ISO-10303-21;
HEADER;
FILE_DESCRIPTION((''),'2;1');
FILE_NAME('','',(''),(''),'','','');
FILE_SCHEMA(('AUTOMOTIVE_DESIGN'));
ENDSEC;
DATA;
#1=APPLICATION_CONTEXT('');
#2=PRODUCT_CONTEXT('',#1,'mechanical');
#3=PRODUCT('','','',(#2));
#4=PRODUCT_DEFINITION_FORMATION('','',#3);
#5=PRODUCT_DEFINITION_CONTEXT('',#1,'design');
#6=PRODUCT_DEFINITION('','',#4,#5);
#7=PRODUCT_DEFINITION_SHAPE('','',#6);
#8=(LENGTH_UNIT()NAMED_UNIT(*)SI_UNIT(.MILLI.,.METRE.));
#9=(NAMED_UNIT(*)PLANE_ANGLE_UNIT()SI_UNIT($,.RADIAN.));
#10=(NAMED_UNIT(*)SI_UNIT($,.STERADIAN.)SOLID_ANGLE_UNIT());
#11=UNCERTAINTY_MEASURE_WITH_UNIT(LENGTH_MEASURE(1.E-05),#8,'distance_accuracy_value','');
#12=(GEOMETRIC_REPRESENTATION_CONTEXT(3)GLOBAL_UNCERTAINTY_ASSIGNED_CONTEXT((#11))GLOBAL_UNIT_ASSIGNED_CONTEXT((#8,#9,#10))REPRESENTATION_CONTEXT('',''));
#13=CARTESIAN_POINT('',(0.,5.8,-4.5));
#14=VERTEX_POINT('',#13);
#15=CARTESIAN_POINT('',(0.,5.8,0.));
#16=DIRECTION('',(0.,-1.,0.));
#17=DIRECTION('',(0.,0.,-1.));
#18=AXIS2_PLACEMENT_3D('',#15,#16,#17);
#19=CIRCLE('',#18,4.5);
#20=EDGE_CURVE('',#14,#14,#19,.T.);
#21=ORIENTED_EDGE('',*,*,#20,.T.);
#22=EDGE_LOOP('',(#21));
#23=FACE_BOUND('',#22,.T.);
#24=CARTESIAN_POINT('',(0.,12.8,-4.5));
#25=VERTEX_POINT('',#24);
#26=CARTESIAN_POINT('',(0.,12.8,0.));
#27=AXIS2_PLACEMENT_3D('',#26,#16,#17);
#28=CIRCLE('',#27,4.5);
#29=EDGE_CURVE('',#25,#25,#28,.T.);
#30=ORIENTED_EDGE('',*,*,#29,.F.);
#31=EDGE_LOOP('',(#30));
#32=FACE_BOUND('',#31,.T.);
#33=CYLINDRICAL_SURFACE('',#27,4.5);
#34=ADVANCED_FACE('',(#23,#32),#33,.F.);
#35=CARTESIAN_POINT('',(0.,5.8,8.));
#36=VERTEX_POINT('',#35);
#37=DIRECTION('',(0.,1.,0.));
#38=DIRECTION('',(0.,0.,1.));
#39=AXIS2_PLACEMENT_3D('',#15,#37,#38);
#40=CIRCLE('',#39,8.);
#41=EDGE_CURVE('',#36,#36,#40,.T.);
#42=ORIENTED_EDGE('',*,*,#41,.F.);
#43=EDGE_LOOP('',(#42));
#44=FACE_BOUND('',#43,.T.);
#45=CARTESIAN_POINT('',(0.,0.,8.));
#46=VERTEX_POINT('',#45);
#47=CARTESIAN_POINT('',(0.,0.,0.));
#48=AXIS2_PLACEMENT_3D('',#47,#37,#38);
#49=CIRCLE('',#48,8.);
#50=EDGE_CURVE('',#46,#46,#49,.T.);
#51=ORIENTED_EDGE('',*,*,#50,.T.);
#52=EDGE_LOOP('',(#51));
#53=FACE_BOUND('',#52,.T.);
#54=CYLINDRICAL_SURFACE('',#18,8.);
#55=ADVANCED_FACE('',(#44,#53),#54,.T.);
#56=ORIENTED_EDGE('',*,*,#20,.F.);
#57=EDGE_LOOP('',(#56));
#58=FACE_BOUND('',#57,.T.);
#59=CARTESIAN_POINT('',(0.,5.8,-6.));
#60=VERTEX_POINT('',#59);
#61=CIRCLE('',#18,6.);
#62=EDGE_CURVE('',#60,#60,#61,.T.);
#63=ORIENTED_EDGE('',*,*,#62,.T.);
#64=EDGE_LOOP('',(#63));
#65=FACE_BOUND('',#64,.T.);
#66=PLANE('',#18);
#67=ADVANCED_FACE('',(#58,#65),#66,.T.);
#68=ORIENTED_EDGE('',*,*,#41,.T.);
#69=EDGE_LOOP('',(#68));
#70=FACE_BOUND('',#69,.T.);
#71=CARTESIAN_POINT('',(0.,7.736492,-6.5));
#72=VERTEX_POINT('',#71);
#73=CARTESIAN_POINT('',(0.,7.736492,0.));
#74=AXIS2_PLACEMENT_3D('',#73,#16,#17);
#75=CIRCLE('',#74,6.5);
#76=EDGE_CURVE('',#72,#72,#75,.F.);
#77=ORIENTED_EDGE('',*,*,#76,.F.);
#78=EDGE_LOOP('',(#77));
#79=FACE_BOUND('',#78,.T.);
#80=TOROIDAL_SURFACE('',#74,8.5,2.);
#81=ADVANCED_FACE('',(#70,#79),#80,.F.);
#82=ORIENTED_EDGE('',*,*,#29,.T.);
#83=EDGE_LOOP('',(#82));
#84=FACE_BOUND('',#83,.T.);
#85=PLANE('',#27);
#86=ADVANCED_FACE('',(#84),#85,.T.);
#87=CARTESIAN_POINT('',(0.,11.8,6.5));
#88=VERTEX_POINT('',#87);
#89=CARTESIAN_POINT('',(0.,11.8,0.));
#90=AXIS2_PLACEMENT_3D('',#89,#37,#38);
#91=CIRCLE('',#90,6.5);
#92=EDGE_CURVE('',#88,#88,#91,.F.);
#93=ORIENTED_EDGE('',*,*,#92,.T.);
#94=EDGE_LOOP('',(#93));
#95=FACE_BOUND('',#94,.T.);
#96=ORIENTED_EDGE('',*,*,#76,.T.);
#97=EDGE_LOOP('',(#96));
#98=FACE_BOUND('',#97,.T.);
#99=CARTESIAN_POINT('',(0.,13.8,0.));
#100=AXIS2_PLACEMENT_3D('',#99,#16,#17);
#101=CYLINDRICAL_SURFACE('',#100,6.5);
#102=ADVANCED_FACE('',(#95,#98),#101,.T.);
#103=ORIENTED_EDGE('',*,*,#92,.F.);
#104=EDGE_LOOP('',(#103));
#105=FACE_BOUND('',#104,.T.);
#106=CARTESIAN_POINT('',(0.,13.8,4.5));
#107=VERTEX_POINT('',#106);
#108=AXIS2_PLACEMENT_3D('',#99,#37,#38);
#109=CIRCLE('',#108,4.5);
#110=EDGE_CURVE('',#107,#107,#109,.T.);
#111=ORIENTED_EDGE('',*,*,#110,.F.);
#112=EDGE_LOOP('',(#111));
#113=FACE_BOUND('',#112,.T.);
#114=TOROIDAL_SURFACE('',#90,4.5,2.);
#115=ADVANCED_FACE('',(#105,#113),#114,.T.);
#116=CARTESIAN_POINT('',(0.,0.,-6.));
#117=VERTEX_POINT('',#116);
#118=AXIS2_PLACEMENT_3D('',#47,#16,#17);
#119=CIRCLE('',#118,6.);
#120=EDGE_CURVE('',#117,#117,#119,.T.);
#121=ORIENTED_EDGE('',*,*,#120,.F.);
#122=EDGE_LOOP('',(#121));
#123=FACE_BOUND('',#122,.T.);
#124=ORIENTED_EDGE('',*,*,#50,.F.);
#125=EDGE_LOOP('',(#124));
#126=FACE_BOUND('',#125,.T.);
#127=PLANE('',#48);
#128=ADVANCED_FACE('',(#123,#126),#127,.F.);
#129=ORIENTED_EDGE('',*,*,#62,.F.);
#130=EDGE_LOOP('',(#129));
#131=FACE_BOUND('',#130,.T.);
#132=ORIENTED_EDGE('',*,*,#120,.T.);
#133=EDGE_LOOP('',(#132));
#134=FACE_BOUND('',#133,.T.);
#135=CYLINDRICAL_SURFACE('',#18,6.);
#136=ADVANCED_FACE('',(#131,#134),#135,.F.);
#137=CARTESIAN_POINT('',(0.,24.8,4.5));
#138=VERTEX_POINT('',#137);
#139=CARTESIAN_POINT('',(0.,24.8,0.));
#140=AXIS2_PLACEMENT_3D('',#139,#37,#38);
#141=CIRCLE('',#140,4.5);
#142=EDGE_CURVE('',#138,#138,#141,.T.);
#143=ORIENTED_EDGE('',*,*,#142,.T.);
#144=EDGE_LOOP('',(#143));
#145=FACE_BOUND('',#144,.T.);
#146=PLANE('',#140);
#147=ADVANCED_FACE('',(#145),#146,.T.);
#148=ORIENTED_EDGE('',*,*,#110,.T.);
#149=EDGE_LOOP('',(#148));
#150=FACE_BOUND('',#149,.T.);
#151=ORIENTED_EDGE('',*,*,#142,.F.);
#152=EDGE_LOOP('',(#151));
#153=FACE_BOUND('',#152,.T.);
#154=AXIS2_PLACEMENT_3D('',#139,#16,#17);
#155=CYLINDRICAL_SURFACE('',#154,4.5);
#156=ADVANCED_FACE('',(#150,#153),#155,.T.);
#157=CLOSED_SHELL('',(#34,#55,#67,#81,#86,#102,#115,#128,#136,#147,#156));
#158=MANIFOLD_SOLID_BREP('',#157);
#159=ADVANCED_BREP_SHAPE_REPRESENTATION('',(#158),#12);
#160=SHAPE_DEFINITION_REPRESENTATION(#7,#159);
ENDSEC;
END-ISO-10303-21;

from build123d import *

# Parameters (mm, degrees)
SKETCH1_R           = 8
BOSS_EXTRUDE1_DEPTH = 5.8
SKETCH2_R           = 6.5
BOSS_EXTRUDE2_DEPTH = 8
SKETCH3_R           = 6
CUT_EXTRUDE1_DEPTH  = 5.8
SKETCH4_R           = 4.5
CUT_EXTRUDE2_DEPTH  = 7
SKETCH5_R           = 4.5
BOSS_EXTRUDE3_DEPTH = 11
FILLET1_R           = 2


with BuildPart() as part:
    # Sketch1 → Boss-Extrude1 (new body)
    with BuildSketch(Plane(origin=(0, 0, 0), x_dir=(1, 0, 0), z_dir=(0, 1, 0))):
        with Locations(Location((0, 0, 0), (0, 0, 270))):
            Circle(SKETCH1_R)
    extrude(amount=BOSS_EXTRUDE1_DEPTH)

    # Sketch2 → Boss-Extrude2 (add)
    with BuildSketch(Plane(origin=(0, 5.8, 0), x_dir=(-1, 0, 0), z_dir=(0, 1, 0))):
        with Locations(Location((0, 0, 0), (0, 0, 90))):
            Circle(SKETCH2_R)
    extrude(amount=BOSS_EXTRUDE2_DEPTH)

    # Sketch3 → Cut-Extrude1 (cut)
    with BuildSketch(Plane.XZ):
        with Locations(Location((0, 0, 0), (0, 0, 270))):
            Circle(SKETCH3_R)
    extrude(amount=-CUT_EXTRUDE1_DEPTH, mode=Mode.SUBTRACT)

    # Sketch4 → Cut-Extrude2 (cut)
    with BuildSketch(Plane.XZ.offset(-5.8)):
        with Locations(Location((0, 0, 0), (0, 0, 270))):
            Circle(SKETCH4_R)
    extrude(amount=-CUT_EXTRUDE2_DEPTH, mode=Mode.SUBTRACT)

    # Sketch5 → Boss-Extrude3 (add)
    with BuildSketch(Plane(origin=(0, 13.8, 0), x_dir=(-1, 0, 0), z_dir=(0, 1, 0))):
        with Locations(Location((0, 0, 0), (0, 0, 270))):
            Circle(SKETCH5_R)
    extrude(amount=BOSS_EXTRUDE3_DEPTH)

    # Fillet1
    # the kernel refuses this fillet: 2 mm, written as the material it adds along each edge
    with BuildSketch(Plane(origin=(0, 5.8, 0), x_dir=(0, 0, 1), z_dir=(-1, 0, 0))) as fillet1_piece_1:
        with BuildLine():
            CenterArc((8.5, 1.936491673), FILLET1_R, 180, 75.522487814)
            Line((6.5, 1.936491673), (6.5, 0))
            Line((6.5, 0), (8, 0))
        make_face()
    revolve(axis=Axis((0, 5.8, 0), (0, 1, 0)))
    # the kernel refuses this fillet: 2 mm, written as the material it takes off along each edge
    with BuildSketch(Plane(origin=(0, 13.8, 0), x_dir=(0, 0, 1), z_dir=(-1, 0, 0))) as fillet1_2_piece_1:
        with BuildLine():
            CenterArc((6.5 - FILLET1_R, -FILLET1_R), FILLET1_R, 0, 90)
            Line((6.5 - FILLET1_R, 0), (6.5, 0))
            Line((6.5, 0), (6.5, -FILLET1_R))
        make_face()
    revolve(axis=Axis((0, 13.8, 0), (0, 1, 0)), mode=Mode.SUBTRACT)


solid = part.part
